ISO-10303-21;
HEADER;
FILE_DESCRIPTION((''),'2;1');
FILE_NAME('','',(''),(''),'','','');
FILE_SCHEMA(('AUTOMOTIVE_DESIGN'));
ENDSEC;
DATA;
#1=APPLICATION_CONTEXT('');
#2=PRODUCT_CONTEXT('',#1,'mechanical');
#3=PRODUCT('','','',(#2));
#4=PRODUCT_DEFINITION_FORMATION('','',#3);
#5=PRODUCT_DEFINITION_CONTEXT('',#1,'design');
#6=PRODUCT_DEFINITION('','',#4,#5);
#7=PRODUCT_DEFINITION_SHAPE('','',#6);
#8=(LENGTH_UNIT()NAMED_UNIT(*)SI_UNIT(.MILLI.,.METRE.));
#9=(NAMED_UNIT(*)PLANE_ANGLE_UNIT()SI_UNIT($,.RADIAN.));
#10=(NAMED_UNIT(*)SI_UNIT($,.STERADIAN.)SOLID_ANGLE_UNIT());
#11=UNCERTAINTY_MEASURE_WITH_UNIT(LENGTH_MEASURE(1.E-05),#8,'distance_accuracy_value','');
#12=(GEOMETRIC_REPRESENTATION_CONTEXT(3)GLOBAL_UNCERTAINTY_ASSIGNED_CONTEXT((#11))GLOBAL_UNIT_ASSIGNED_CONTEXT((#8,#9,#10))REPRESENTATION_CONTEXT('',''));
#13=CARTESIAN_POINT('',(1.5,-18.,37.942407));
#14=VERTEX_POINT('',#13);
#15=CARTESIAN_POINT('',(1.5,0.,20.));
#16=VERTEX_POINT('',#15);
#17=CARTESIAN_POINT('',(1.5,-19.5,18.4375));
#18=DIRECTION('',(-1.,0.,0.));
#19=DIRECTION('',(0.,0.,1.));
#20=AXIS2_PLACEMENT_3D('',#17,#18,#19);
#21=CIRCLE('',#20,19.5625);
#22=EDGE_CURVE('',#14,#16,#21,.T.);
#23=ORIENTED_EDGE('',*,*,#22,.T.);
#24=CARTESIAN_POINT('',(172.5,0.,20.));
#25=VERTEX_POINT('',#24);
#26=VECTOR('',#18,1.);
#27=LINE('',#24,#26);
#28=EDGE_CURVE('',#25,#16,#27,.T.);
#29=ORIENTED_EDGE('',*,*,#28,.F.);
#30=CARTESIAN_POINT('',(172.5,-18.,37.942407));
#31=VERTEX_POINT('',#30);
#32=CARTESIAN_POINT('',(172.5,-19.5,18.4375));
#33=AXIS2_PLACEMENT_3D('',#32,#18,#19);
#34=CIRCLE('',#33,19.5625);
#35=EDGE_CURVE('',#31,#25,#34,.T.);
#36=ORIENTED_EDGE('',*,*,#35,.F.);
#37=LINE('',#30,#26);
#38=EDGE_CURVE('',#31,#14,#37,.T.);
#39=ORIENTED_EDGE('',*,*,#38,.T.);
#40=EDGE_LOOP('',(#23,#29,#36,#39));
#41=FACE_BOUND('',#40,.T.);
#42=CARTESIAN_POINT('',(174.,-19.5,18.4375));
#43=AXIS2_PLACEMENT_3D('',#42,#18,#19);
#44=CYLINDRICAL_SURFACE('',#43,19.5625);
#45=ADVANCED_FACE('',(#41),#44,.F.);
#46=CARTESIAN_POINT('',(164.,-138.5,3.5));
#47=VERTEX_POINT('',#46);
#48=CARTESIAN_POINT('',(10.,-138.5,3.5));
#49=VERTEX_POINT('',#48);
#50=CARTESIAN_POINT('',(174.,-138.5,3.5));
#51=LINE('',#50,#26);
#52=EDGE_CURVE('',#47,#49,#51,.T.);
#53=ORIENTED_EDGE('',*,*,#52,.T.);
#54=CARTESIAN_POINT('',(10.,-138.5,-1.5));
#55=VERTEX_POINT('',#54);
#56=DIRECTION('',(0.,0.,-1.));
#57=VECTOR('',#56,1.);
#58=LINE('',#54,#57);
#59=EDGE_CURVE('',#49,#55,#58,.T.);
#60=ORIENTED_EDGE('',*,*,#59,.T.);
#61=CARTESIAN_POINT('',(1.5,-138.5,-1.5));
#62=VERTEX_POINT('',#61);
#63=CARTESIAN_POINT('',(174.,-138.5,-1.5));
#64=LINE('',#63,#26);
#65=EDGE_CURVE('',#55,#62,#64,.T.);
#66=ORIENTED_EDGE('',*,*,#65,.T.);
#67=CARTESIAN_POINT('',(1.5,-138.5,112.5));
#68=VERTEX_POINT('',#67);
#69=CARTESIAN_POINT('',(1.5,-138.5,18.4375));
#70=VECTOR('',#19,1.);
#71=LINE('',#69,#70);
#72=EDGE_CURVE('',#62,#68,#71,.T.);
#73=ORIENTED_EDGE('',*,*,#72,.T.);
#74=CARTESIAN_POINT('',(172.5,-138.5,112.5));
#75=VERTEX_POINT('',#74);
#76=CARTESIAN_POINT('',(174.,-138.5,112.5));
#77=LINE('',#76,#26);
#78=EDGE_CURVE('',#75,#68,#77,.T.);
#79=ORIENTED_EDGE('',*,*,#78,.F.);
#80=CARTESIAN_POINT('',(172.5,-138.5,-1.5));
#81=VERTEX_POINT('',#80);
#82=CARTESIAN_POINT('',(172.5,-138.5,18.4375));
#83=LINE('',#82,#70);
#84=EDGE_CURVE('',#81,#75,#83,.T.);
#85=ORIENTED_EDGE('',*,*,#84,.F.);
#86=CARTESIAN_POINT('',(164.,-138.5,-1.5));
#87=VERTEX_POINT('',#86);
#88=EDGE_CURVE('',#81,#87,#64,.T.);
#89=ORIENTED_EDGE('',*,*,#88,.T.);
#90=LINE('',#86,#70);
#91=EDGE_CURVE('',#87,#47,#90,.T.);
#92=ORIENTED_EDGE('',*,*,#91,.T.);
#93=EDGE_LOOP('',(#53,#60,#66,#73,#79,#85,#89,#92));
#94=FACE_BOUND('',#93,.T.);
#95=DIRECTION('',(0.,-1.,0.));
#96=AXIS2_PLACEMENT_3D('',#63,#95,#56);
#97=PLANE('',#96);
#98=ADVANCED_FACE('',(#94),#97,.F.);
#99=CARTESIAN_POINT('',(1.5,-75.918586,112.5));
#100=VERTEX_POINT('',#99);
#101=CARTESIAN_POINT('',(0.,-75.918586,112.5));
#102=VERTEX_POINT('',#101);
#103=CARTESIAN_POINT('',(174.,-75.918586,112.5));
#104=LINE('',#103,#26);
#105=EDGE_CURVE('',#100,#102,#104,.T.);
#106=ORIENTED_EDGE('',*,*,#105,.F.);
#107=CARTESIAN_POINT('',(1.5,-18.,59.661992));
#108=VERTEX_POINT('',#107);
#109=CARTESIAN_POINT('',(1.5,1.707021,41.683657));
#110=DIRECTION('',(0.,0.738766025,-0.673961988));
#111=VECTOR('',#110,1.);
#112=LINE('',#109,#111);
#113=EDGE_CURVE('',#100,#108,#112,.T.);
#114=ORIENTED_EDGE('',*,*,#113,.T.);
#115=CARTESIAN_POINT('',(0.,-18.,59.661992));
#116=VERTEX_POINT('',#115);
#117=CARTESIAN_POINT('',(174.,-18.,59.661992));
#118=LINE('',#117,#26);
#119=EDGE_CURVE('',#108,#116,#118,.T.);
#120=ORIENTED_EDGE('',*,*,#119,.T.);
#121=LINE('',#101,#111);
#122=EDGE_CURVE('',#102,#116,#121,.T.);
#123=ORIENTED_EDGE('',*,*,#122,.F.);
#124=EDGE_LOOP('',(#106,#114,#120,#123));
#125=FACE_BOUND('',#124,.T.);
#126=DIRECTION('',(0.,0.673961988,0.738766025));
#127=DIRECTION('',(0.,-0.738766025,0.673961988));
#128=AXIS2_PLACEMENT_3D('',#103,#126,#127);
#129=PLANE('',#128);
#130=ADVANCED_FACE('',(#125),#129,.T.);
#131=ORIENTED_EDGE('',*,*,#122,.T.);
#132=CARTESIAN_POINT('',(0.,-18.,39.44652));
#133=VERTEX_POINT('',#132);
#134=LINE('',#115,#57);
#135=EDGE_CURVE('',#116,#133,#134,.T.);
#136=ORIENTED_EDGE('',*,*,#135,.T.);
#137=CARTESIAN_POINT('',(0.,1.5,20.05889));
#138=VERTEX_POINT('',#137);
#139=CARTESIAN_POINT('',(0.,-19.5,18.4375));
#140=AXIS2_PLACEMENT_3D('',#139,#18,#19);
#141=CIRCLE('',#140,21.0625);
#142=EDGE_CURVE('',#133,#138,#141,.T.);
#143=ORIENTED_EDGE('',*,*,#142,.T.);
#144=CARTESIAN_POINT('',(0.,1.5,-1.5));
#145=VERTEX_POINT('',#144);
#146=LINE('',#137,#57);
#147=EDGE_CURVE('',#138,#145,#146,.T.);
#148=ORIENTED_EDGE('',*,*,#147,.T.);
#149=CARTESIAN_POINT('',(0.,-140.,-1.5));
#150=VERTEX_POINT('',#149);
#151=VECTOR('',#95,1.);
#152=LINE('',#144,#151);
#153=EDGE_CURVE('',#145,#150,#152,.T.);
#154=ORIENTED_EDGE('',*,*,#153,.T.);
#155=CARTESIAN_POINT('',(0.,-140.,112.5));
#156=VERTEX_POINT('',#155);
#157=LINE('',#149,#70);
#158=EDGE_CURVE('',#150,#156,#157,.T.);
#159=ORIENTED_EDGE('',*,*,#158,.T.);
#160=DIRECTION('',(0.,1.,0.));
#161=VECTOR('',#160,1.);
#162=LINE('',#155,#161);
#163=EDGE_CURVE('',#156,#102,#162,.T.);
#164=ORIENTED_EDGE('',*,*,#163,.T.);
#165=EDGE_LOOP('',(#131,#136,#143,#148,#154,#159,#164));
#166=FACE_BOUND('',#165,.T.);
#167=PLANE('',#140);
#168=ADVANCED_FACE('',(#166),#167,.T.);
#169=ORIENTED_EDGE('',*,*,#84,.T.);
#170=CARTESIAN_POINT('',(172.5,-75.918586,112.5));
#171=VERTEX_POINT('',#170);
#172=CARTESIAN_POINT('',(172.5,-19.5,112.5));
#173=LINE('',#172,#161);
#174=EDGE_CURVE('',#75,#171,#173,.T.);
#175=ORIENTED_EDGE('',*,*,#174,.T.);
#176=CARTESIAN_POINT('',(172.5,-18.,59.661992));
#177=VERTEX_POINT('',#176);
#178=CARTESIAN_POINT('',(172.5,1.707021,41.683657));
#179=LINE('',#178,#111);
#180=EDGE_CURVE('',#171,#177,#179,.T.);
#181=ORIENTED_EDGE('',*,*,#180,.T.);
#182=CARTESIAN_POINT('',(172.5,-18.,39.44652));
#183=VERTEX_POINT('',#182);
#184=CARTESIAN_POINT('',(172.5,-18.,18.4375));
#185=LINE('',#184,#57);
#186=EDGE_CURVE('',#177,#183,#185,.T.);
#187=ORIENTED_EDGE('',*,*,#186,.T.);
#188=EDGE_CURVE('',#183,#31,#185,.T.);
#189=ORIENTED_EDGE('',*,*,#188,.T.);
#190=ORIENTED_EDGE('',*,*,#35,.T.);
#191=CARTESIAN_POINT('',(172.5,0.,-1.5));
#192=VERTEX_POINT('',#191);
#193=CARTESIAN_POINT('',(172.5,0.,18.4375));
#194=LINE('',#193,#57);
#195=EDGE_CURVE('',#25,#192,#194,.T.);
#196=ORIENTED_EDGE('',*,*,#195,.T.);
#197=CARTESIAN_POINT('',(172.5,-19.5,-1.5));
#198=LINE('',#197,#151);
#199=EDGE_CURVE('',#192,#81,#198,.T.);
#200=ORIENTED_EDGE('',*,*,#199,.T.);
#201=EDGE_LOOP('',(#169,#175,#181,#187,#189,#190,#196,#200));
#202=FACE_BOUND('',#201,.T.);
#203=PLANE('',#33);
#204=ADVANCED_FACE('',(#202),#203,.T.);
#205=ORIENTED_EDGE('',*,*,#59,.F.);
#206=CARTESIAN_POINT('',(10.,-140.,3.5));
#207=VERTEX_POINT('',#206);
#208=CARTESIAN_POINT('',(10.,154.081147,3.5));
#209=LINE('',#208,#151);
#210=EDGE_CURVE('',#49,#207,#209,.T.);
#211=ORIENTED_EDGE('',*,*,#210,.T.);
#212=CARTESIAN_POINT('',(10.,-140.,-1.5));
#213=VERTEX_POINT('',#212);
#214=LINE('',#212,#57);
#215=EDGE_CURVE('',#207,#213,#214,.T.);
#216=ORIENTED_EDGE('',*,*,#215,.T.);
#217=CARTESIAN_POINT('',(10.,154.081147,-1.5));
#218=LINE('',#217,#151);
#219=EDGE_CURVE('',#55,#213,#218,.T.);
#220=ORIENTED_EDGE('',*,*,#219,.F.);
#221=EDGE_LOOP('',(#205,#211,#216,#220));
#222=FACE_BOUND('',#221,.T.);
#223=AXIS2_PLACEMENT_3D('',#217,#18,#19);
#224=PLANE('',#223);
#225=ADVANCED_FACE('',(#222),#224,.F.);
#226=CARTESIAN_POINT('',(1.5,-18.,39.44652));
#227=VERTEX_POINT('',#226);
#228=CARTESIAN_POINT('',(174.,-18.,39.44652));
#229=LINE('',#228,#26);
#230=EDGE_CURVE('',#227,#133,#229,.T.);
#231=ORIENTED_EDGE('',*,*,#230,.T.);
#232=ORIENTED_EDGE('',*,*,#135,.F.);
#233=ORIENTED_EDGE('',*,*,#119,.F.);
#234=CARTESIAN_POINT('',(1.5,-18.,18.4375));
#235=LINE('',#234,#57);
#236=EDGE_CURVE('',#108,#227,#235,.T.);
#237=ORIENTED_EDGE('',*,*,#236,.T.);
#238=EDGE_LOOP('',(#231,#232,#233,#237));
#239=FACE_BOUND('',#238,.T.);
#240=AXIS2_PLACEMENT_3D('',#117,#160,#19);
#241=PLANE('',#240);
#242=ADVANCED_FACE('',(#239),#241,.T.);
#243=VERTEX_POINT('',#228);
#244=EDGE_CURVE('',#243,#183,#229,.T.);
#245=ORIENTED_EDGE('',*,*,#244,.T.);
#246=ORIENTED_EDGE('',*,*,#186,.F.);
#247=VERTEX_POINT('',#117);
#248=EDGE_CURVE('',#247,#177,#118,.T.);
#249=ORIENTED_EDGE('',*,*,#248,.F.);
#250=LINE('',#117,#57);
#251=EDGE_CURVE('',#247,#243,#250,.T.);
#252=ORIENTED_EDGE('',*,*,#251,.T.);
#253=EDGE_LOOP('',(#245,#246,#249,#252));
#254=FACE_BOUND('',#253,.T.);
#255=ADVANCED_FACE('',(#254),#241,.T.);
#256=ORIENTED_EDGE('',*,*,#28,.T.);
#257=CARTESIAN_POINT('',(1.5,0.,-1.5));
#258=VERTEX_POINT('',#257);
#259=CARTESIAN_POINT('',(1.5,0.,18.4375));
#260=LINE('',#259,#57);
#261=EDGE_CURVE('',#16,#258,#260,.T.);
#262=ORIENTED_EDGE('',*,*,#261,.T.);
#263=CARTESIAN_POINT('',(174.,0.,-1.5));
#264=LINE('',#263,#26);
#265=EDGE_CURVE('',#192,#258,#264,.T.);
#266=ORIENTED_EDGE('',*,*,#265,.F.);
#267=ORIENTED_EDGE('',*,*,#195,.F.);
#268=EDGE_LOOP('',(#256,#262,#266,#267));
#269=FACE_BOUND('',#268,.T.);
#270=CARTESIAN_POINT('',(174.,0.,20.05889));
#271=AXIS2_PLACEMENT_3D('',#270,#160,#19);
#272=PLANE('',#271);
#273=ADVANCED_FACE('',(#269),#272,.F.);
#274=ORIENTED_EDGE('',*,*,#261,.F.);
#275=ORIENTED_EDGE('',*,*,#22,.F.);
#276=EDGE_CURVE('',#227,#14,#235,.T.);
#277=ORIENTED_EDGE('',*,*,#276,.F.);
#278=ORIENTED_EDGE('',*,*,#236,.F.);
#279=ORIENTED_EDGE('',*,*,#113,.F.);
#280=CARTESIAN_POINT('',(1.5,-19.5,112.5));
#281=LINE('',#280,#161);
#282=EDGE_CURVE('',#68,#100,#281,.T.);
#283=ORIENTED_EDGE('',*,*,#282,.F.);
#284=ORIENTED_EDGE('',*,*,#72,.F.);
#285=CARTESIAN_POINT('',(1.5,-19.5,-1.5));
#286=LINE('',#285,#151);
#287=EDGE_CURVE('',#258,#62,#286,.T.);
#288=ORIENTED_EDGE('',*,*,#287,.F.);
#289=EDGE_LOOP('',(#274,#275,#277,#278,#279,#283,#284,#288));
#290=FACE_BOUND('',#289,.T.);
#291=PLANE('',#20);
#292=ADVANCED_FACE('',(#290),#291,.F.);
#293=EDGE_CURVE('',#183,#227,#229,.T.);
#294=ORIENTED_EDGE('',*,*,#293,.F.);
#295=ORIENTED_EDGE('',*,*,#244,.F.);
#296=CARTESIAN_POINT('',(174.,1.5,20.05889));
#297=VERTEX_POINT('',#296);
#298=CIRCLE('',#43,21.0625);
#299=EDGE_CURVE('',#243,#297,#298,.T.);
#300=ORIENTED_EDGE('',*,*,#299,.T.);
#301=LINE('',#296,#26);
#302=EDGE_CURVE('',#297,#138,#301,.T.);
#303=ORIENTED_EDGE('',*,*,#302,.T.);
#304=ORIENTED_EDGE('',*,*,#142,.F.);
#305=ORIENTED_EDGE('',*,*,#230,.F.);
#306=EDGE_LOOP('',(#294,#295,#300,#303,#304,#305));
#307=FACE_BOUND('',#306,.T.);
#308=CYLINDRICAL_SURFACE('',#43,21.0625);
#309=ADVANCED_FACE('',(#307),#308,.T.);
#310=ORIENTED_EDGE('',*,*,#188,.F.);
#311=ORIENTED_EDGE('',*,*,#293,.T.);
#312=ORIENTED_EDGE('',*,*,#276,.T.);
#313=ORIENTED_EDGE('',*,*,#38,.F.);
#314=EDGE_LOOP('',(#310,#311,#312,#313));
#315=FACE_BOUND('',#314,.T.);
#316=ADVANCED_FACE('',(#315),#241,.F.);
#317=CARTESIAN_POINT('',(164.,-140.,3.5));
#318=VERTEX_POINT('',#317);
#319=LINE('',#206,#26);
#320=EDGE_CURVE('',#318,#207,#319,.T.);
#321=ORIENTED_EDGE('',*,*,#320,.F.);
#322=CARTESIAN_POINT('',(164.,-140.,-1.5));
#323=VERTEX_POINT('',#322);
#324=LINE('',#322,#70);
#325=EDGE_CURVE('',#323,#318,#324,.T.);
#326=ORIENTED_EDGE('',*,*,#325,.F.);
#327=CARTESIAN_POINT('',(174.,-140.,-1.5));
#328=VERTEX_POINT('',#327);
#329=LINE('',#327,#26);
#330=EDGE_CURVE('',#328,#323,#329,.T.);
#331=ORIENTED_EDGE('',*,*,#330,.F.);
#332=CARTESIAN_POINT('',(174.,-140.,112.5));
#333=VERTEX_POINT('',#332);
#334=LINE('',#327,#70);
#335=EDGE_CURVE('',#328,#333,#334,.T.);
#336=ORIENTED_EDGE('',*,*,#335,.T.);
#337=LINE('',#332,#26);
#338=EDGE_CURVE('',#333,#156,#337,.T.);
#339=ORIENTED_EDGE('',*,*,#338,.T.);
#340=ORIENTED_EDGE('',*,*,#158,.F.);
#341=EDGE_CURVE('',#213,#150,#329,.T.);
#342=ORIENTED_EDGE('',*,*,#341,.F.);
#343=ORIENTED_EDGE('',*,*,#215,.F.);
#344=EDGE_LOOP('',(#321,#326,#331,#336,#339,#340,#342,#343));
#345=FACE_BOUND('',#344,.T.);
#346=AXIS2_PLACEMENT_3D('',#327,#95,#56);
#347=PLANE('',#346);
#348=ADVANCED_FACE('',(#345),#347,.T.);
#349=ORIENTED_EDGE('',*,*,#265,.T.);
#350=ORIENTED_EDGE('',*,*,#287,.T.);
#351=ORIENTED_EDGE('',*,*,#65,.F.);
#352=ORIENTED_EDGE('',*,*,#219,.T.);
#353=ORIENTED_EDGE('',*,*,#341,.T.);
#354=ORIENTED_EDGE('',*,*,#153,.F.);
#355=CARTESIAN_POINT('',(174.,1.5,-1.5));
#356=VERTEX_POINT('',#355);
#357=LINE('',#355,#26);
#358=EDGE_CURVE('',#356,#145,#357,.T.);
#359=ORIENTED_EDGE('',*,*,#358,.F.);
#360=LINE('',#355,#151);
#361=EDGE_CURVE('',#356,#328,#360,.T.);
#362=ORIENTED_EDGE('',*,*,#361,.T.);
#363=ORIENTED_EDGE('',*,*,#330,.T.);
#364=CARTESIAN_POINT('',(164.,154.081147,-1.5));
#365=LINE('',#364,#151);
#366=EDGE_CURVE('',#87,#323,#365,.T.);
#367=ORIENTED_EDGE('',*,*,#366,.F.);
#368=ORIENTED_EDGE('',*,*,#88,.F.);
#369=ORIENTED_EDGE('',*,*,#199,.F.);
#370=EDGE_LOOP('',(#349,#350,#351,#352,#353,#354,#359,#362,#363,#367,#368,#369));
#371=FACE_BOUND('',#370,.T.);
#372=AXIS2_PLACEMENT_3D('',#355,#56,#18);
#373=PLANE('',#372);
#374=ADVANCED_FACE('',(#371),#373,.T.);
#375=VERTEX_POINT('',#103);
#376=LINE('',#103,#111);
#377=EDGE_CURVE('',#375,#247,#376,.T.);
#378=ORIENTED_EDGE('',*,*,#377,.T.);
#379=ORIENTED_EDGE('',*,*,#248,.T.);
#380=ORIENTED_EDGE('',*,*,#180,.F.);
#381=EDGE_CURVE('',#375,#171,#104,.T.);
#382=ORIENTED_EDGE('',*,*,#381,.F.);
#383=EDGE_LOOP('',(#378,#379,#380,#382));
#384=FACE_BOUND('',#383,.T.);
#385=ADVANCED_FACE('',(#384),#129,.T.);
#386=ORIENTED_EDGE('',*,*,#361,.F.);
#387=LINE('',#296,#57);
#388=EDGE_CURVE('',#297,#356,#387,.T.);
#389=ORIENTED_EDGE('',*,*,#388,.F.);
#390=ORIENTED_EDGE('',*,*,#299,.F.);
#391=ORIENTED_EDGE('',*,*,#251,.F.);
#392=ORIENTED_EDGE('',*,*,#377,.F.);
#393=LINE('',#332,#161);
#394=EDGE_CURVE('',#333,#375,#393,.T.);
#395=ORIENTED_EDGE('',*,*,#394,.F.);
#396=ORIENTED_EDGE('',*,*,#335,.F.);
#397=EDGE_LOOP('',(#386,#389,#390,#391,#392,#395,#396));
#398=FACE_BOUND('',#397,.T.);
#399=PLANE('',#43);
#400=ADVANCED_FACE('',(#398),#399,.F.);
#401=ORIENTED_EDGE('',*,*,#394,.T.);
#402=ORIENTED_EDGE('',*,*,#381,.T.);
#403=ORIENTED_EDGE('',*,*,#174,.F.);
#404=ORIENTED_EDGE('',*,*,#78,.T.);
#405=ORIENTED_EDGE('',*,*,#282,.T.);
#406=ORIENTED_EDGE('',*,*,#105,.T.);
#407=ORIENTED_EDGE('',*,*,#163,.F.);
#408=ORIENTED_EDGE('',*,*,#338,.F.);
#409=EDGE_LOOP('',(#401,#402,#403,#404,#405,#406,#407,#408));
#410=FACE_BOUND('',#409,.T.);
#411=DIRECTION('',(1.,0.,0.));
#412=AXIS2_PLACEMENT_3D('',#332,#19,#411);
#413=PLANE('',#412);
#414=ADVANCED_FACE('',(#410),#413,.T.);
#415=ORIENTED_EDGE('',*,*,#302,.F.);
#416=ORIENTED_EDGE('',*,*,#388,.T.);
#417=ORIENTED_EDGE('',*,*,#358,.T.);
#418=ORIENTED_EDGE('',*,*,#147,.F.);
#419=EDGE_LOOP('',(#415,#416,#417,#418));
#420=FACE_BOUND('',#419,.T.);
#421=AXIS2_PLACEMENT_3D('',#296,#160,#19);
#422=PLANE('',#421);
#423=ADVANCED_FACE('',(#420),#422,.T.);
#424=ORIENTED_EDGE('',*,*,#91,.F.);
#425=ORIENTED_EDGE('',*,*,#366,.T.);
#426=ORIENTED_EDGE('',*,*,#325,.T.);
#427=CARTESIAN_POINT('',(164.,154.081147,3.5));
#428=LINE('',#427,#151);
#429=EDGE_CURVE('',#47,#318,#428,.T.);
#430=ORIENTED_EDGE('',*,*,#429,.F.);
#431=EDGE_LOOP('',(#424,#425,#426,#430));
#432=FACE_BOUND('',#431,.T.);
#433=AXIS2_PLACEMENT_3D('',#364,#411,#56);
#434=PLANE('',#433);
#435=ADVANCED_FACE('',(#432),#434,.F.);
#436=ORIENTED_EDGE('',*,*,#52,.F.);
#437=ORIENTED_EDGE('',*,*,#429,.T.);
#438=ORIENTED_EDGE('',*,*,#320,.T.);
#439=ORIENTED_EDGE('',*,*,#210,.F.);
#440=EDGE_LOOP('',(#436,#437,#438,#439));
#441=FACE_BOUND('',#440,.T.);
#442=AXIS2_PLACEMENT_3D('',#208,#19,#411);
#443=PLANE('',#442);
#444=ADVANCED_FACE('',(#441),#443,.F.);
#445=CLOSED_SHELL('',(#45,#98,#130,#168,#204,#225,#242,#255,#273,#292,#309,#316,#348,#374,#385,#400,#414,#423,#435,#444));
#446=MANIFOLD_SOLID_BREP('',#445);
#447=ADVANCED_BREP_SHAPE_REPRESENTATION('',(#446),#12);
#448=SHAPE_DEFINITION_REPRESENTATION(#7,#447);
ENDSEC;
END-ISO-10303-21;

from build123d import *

# Parameters (mm, degrees)
BOSS_EXTRUDE2_DEPTH = 174
SHELL1_START        = 1.5
SHELL1_DEPTH        = 171
SKETCH2_W           = 154
SKETCH2_H           = 5
CUT_EXTRUDE1_DEPTH  = 140


# Read off the part's stored shape, not the designer's step: Shell1
with BuildPart() as part:
    # Sketch1 → Boss-Extrude2 (new body)
    with BuildSketch(Plane.YZ):
        with BuildLine():
            Line((1.5, 20.058890221), (1.5, -1.5))
            Line((1.5, -1.5), (-140, -1.5))
            Line((-140, -1.5), (-140, 112.5))
            Line((-140, 112.5), (-75.918585959, 112.5))
            Line((-75.918585959, 112.5), (-18, 59.661991757))
            Line((-18, 59.661991757), (-18, 39.44651964))
            ThreePointArc((-18, 39.44651964), (-4.649661835, 33.373910634), (1.5, 20.058890221))
        make_face()
    extrude(amount=BOSS_EXTRUDE2_DEPTH)

    # Shell1 outline → Shell1 (cut)
    with BuildSketch(Plane.YZ.offset(SHELL1_START)):
        with BuildLine():
            ThreePointArc((0, 20), (-5.689406445, 32.292423742), (-18, 37.942407235))
            Line((-18, 37.942407235), (-18, 59.661991757))
            Line((-18, 59.661991757), (-75.918585959, 112.5))
            Line((-75.918585959, 112.5), (-138.5, 112.5))
            Line((-138.5, 112.5), (-138.5, -1.5))
            Line((-138.5, -1.5), (0, -1.5))
            Line((0, -1.5), (0, 20))
        make_face()
    extrude(amount=SHELL1_DEPTH, mode=Mode.SUBTRACT)

    # Sketch2 → Cut-Extrude1 (cut)
    with BuildSketch(Plane.XZ.offset(140)):
        with Locations((87, 1)):
            Rectangle(SKETCH2_W, SKETCH2_H)
    extrude(amount=-CUT_EXTRUDE1_DEPTH, mode=Mode.SUBTRACT)


solid = part.part
